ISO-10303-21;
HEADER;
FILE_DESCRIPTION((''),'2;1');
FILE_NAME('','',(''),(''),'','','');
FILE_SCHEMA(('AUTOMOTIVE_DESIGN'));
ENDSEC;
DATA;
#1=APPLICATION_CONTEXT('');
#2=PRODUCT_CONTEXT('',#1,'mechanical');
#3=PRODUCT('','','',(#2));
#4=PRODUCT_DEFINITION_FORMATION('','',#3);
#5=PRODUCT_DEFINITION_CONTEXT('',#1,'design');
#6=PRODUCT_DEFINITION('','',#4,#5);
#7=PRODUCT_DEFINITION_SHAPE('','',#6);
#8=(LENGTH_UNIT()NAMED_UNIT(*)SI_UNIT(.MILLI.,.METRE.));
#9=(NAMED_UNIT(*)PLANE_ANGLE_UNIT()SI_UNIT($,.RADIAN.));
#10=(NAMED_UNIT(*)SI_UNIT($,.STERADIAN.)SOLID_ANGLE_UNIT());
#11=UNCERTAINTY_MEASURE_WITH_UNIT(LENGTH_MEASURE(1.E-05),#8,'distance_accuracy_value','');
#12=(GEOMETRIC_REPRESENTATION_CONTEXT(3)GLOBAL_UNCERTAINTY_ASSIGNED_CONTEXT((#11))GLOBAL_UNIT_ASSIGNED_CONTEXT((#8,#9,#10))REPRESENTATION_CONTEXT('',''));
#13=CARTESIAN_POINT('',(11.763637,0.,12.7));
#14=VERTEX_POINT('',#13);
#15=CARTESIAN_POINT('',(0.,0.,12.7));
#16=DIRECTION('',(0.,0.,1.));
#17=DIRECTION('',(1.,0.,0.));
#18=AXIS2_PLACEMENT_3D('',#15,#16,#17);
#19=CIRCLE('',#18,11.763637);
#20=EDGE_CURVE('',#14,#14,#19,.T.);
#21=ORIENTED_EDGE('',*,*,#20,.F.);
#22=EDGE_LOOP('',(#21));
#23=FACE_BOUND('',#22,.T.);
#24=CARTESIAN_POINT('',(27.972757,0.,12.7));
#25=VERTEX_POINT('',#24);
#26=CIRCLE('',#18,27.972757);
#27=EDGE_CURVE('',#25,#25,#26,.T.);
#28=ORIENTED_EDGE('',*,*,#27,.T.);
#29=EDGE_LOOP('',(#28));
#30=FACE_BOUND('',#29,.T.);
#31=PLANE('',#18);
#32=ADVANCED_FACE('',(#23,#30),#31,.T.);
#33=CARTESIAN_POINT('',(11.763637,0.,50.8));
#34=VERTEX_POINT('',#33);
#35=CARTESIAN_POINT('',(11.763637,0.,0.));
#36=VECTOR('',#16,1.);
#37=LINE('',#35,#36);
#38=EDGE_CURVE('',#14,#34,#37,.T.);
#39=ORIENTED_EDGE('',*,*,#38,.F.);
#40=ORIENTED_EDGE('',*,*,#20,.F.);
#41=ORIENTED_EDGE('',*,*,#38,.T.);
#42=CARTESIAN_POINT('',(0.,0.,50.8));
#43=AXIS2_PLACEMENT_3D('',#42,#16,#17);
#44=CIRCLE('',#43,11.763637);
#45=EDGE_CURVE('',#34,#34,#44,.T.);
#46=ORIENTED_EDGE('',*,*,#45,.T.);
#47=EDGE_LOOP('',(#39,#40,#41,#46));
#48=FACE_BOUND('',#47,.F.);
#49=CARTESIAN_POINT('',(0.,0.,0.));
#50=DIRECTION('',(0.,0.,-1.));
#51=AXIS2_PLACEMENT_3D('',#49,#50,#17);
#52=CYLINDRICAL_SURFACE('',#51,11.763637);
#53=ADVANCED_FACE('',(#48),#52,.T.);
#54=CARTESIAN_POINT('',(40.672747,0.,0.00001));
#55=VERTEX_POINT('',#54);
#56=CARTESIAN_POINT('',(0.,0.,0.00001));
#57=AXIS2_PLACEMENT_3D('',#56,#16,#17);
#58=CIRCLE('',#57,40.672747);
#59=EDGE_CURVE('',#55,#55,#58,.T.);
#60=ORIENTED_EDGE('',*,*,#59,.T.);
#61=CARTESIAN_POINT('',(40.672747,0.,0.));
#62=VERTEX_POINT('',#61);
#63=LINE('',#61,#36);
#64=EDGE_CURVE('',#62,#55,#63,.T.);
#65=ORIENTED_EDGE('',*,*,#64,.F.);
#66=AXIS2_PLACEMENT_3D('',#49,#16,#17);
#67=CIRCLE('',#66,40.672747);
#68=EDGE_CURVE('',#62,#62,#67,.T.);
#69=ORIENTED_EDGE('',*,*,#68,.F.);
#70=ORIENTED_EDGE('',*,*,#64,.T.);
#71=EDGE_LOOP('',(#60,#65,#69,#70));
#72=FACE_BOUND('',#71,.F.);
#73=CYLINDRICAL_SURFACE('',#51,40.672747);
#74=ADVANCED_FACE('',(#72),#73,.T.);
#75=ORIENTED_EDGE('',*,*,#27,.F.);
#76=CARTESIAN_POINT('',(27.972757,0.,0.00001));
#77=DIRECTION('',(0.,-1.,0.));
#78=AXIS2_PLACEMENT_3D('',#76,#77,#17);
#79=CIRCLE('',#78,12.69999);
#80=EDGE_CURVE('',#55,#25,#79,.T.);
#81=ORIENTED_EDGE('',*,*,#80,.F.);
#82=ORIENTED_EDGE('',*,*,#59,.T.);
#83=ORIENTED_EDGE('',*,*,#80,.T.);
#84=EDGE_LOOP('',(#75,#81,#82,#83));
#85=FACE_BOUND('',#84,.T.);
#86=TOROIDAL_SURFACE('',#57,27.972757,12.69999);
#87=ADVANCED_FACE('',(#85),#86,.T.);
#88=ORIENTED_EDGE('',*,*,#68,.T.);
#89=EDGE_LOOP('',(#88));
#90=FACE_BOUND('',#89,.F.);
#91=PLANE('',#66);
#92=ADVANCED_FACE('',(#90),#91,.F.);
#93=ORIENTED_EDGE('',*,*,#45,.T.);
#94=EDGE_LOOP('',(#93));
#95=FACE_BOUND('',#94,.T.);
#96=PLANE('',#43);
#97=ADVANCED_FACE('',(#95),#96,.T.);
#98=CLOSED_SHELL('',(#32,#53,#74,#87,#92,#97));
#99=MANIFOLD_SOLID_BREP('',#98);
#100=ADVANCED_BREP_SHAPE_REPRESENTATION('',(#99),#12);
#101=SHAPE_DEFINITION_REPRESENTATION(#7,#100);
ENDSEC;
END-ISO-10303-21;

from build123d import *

# Parameters (mm, degrees)
F0_R     = 40.6727472004
F0_R_2   = 11.7636370253
F1_DEPTH = 12.7
F2_R     = 12.69999
F3_DEPTH = 50.8


# Not quite as in the source:
# - a fillet or chamfer is up to 0.001 mm smaller than in the source, because OpenCascade refuses the exact size
# - the program builds the solid bodies; features that only make, move or delete a surface that nothing else refers to are left out


with BuildPart() as f1:
    # F0 (on Top) → F1 (new body)
    with BuildSketch(Plane.XY):
        Circle(F0_R)
        Circle(F0_R_2, mode=Mode.SUBTRACT)
    extrude(amount=F1_DEPTH)

    # F2 (radius 12.7 in the source; OpenCascade refuses exactly that, so slightly less here)
    f2_edges = [f1.edges().sort_by_distance(p)[0] for p in [
        (-40.672747, 0, 12.7),
    ]]
    fillet(f2_edges, radius=F2_R)

    # F0 (on Top) → F3 (join)
    with BuildSketch(Plane.XY):
        Circle(F0_R_2)
    extrude(amount=F3_DEPTH)


solid = f1.part
